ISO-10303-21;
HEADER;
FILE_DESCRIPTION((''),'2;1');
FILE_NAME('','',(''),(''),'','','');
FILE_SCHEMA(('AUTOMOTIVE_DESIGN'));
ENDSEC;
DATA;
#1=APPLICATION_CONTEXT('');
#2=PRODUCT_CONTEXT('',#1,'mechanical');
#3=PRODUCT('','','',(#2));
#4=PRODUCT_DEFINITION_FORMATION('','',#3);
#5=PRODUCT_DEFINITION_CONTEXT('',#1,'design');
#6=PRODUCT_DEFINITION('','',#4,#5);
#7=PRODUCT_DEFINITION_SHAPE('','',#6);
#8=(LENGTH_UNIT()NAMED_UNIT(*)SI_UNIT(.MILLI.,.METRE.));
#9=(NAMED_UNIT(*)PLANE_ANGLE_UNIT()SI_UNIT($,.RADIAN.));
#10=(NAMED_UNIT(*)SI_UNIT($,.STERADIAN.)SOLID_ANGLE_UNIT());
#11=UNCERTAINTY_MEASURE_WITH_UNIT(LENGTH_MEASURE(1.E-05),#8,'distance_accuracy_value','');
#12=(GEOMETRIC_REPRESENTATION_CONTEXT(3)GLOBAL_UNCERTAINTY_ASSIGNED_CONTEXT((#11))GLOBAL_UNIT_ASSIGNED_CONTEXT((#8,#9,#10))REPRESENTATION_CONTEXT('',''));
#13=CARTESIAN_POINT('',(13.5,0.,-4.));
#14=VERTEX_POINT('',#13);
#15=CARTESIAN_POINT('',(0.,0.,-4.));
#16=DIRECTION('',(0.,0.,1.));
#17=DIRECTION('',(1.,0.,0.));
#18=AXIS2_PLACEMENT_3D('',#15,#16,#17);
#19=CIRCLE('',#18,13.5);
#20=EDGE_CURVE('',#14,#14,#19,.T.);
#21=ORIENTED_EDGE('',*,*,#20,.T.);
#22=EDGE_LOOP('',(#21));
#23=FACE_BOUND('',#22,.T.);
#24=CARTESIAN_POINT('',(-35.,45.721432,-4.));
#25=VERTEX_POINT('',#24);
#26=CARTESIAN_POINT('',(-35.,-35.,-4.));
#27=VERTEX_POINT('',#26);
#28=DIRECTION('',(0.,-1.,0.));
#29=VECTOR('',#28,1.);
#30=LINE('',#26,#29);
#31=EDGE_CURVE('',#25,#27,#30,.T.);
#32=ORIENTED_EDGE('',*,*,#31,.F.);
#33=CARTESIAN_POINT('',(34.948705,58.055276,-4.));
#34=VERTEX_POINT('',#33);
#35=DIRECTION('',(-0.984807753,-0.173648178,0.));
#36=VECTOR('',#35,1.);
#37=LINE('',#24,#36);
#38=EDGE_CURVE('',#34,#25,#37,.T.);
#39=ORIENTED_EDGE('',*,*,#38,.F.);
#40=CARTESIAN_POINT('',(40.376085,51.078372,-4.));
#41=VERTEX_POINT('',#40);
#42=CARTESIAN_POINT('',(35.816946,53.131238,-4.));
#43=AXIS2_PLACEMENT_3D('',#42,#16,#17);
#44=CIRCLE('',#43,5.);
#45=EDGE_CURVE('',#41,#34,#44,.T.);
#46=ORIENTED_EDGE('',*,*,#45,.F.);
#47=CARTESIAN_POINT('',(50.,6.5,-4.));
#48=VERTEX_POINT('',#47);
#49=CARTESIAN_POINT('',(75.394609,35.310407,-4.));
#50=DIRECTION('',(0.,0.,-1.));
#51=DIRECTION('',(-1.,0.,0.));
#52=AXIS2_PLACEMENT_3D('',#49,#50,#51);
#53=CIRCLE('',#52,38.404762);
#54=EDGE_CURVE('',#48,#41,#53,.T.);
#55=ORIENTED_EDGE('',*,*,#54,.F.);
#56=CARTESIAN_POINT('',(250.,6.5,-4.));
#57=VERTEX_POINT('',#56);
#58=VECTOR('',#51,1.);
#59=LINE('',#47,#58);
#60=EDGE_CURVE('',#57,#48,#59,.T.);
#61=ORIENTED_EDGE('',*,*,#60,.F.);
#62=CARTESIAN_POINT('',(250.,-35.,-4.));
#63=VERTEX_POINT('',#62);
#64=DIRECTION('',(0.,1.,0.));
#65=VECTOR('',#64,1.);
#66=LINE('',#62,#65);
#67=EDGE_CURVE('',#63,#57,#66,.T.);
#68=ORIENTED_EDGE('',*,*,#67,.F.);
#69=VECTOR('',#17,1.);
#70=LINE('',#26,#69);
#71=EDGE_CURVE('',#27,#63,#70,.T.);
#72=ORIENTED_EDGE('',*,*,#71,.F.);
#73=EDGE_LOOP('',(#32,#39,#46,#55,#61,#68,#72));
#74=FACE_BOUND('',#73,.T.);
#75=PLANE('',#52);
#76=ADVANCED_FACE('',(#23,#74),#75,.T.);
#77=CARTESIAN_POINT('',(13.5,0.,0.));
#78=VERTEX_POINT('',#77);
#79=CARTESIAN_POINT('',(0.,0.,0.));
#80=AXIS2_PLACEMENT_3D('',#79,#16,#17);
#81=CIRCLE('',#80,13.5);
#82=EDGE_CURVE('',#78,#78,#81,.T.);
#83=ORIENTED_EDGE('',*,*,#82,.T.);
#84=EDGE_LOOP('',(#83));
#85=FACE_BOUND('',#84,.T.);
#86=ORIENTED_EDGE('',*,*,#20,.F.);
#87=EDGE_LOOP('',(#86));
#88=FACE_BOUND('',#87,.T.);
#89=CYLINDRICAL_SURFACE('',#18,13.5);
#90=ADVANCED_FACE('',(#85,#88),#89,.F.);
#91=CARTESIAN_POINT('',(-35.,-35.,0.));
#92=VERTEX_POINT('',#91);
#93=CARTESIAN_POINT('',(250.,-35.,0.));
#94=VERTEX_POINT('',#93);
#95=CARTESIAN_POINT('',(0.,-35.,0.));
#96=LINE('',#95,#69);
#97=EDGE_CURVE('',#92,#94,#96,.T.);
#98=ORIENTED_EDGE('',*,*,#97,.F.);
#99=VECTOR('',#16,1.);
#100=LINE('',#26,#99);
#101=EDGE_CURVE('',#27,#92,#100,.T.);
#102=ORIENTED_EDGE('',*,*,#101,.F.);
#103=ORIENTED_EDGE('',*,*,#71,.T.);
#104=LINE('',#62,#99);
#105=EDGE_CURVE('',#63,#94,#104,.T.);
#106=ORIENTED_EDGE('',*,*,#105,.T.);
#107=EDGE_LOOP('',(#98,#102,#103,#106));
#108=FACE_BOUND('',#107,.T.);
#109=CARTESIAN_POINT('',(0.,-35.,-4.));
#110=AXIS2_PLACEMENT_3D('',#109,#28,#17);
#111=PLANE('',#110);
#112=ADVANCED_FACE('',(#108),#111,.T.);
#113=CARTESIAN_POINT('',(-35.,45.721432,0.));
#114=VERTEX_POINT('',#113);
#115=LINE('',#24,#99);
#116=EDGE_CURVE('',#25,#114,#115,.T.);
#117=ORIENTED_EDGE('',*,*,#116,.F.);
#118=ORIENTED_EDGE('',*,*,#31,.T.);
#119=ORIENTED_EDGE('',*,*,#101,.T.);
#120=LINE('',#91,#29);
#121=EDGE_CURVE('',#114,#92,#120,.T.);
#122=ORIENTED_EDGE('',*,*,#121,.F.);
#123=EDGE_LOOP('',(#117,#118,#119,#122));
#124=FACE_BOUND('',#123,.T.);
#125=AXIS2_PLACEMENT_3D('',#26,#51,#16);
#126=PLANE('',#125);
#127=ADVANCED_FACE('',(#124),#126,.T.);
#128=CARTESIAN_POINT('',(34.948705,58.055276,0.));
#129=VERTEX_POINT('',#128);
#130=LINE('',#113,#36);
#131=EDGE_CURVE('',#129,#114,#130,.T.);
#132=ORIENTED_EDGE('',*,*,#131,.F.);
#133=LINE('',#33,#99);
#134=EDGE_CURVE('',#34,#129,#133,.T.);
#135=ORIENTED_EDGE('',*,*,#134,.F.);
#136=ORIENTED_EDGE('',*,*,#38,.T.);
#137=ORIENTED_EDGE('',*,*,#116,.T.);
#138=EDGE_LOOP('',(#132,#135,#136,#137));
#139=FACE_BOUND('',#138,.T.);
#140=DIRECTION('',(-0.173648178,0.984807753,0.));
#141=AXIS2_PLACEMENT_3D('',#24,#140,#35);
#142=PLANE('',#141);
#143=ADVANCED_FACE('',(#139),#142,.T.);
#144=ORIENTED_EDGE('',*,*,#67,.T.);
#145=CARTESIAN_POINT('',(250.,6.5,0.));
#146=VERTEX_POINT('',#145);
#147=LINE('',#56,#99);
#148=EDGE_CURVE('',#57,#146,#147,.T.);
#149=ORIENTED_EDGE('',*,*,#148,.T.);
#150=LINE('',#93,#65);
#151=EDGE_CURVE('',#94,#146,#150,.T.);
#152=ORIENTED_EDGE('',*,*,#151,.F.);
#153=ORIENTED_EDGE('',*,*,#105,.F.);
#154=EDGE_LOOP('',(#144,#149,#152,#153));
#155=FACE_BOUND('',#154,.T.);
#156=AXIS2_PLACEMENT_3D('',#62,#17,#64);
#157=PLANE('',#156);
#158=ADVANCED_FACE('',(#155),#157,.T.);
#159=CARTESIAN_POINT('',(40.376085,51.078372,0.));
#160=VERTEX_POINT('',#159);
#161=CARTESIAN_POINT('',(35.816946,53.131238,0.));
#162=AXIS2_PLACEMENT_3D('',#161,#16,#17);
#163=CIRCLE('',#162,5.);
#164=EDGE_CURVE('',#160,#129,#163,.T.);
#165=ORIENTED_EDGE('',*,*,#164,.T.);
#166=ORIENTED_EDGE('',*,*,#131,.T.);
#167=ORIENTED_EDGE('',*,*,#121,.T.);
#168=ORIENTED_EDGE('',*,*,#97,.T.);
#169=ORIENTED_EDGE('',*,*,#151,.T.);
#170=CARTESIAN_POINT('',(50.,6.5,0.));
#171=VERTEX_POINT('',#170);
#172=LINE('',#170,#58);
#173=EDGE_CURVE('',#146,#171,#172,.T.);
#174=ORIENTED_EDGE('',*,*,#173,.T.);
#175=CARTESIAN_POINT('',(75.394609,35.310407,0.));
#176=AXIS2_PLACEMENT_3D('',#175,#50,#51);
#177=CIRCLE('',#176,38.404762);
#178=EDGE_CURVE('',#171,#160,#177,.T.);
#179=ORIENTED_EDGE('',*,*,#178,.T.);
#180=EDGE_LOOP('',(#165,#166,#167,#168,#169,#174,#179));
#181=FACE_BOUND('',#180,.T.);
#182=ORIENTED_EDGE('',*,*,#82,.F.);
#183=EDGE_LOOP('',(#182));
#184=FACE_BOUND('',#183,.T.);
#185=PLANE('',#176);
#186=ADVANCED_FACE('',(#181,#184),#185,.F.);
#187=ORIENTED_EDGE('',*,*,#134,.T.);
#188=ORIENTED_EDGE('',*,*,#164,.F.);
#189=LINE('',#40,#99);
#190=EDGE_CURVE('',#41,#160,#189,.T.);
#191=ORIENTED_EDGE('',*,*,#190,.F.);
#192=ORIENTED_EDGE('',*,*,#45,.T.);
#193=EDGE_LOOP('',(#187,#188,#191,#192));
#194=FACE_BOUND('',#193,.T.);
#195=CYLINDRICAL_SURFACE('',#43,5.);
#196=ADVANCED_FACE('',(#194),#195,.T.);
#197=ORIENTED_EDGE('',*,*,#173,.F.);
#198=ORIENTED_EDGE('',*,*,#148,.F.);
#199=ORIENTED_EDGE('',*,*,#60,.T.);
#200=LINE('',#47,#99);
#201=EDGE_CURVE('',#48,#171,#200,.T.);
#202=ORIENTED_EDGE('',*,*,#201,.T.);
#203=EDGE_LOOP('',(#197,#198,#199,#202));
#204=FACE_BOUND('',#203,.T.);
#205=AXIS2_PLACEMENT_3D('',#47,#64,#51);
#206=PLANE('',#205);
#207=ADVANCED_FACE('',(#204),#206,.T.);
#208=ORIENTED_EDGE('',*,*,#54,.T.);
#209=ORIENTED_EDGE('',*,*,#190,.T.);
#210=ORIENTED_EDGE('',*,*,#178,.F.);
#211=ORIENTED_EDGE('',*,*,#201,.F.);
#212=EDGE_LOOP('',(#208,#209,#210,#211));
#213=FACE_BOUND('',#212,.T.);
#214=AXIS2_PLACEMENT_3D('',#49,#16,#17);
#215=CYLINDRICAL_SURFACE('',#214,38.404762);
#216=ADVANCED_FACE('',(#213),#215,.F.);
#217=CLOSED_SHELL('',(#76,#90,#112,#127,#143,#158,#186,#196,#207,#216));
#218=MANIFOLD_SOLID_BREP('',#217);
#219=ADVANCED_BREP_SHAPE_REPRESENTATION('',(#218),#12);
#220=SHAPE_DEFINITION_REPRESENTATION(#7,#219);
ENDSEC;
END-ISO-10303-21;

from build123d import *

# Parameters (mm, degrees)
SKETCH_1_R             = 13.5
SM_BASE_FLANGE_1_DEPTH = 4


# Sheet-metal steps are written as plain solids
with BuildPart() as part:
    # Sketch 1 → Базовая кромка1 (new body)
    with BuildSketch(Plane.XY):
        with BuildLine():
            Line((0, -35), (250, -35))
            Line((250, -35), (250, 6.5))
            Line((250, 6.5), (50, 6.5))
            ThreePointArc((50, 6.5), (37.854703837, 27.206009472), (40.376084675, 51.078371856))
            ThreePointArc((40.376084675, 51.078371856), (39.763461316, 56.201257152), (34.948705483, 58.055276407))
            Line((34.948705483, 58.055276407), (-35, 45.721432364))
            Line((-35, 45.721432364), (-35, -35))
            Line((-35, -35), (0, -35))
        make_face()
        Circle(SKETCH_1_R, mode=Mode.SUBTRACT)
    extrude(amount=-SM_BASE_FLANGE_1_DEPTH)


solid = part.part
